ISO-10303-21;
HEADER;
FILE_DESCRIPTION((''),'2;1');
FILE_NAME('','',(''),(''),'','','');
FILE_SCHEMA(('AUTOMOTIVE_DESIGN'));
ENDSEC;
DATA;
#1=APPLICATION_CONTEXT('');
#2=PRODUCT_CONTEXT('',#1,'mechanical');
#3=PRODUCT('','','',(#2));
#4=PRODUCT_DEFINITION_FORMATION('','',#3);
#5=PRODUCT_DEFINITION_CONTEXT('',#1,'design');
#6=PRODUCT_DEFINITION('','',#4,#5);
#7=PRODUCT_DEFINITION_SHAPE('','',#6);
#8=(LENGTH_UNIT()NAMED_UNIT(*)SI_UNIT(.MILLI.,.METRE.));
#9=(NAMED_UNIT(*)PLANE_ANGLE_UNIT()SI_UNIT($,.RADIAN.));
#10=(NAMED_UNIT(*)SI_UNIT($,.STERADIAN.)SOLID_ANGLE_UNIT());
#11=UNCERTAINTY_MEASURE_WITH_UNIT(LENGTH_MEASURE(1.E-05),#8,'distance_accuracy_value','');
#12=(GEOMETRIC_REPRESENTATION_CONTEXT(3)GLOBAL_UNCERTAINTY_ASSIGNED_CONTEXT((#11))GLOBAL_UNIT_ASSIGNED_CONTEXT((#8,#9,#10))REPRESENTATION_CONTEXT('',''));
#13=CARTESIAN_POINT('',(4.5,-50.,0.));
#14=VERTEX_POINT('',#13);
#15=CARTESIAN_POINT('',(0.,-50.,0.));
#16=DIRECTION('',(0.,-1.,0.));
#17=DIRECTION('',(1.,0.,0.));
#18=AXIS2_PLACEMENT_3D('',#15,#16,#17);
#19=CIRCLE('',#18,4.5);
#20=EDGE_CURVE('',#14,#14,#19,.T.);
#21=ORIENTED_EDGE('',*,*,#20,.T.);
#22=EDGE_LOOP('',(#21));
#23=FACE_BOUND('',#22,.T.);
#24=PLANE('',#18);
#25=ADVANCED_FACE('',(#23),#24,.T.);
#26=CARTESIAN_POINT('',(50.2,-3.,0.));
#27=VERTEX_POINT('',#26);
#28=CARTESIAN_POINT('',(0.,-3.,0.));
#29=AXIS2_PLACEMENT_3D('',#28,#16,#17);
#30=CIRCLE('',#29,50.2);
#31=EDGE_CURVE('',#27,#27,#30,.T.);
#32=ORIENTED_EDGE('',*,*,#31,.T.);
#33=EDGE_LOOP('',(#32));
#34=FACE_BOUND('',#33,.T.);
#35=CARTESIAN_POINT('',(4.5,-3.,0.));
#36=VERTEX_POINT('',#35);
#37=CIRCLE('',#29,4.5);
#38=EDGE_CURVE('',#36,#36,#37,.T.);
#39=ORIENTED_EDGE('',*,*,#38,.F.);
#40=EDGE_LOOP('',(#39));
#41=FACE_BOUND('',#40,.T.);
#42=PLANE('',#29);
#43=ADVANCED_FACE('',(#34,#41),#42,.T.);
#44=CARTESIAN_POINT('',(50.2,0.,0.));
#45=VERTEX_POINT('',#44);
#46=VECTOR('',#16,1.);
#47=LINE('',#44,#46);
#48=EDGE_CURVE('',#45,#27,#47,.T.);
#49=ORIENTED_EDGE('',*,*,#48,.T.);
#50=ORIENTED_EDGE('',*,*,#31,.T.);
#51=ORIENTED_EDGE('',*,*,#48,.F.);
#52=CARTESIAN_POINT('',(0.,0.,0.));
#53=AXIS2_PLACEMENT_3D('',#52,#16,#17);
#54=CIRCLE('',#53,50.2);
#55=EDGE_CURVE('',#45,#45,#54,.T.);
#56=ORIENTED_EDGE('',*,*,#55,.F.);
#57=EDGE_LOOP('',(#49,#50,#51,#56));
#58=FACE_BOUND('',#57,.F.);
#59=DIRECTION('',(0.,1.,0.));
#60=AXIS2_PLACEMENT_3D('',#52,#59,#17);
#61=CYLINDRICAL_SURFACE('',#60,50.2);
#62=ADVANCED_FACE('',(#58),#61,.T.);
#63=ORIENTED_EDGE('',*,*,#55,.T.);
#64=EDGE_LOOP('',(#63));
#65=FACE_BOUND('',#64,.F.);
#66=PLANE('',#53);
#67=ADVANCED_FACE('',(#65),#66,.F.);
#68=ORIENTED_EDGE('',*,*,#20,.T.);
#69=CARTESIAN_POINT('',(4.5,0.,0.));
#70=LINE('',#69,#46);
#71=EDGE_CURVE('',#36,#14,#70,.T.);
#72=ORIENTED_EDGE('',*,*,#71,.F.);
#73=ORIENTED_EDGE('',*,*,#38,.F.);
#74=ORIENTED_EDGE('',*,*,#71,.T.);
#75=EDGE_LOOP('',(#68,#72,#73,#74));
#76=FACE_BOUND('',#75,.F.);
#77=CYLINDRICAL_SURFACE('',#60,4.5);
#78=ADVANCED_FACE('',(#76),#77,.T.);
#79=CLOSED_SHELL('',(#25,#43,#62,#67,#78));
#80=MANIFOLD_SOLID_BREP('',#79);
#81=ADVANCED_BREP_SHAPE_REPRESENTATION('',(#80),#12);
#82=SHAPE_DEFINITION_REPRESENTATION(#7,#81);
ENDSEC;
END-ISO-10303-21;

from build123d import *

# Parameters (mm, degrees)
F0_R     = 50.2
F0_R_2   = 4.5
F1_DEPTH = 3
F4_R     = 4.5
F5_DEPTH = 50


# Not quite as in the source:
# - the program builds the solid bodies; features that only make, move or delete a surface that nothing else refers to are left out


with BuildPart() as f1:
    # F0 (on Front) → F1 (new body)
    with BuildSketch(Plane.XZ):
        Circle(F0_R)
        Circle(F0_R_2, mode=Mode.SUBTRACT)
    extrude(amount=F1_DEPTH)

    # F4 (on Front) → F5 (join)
    with BuildSketch(Plane.XZ):
        Circle(F4_R)
    extrude(amount=F5_DEPTH)


solid = f1.part
